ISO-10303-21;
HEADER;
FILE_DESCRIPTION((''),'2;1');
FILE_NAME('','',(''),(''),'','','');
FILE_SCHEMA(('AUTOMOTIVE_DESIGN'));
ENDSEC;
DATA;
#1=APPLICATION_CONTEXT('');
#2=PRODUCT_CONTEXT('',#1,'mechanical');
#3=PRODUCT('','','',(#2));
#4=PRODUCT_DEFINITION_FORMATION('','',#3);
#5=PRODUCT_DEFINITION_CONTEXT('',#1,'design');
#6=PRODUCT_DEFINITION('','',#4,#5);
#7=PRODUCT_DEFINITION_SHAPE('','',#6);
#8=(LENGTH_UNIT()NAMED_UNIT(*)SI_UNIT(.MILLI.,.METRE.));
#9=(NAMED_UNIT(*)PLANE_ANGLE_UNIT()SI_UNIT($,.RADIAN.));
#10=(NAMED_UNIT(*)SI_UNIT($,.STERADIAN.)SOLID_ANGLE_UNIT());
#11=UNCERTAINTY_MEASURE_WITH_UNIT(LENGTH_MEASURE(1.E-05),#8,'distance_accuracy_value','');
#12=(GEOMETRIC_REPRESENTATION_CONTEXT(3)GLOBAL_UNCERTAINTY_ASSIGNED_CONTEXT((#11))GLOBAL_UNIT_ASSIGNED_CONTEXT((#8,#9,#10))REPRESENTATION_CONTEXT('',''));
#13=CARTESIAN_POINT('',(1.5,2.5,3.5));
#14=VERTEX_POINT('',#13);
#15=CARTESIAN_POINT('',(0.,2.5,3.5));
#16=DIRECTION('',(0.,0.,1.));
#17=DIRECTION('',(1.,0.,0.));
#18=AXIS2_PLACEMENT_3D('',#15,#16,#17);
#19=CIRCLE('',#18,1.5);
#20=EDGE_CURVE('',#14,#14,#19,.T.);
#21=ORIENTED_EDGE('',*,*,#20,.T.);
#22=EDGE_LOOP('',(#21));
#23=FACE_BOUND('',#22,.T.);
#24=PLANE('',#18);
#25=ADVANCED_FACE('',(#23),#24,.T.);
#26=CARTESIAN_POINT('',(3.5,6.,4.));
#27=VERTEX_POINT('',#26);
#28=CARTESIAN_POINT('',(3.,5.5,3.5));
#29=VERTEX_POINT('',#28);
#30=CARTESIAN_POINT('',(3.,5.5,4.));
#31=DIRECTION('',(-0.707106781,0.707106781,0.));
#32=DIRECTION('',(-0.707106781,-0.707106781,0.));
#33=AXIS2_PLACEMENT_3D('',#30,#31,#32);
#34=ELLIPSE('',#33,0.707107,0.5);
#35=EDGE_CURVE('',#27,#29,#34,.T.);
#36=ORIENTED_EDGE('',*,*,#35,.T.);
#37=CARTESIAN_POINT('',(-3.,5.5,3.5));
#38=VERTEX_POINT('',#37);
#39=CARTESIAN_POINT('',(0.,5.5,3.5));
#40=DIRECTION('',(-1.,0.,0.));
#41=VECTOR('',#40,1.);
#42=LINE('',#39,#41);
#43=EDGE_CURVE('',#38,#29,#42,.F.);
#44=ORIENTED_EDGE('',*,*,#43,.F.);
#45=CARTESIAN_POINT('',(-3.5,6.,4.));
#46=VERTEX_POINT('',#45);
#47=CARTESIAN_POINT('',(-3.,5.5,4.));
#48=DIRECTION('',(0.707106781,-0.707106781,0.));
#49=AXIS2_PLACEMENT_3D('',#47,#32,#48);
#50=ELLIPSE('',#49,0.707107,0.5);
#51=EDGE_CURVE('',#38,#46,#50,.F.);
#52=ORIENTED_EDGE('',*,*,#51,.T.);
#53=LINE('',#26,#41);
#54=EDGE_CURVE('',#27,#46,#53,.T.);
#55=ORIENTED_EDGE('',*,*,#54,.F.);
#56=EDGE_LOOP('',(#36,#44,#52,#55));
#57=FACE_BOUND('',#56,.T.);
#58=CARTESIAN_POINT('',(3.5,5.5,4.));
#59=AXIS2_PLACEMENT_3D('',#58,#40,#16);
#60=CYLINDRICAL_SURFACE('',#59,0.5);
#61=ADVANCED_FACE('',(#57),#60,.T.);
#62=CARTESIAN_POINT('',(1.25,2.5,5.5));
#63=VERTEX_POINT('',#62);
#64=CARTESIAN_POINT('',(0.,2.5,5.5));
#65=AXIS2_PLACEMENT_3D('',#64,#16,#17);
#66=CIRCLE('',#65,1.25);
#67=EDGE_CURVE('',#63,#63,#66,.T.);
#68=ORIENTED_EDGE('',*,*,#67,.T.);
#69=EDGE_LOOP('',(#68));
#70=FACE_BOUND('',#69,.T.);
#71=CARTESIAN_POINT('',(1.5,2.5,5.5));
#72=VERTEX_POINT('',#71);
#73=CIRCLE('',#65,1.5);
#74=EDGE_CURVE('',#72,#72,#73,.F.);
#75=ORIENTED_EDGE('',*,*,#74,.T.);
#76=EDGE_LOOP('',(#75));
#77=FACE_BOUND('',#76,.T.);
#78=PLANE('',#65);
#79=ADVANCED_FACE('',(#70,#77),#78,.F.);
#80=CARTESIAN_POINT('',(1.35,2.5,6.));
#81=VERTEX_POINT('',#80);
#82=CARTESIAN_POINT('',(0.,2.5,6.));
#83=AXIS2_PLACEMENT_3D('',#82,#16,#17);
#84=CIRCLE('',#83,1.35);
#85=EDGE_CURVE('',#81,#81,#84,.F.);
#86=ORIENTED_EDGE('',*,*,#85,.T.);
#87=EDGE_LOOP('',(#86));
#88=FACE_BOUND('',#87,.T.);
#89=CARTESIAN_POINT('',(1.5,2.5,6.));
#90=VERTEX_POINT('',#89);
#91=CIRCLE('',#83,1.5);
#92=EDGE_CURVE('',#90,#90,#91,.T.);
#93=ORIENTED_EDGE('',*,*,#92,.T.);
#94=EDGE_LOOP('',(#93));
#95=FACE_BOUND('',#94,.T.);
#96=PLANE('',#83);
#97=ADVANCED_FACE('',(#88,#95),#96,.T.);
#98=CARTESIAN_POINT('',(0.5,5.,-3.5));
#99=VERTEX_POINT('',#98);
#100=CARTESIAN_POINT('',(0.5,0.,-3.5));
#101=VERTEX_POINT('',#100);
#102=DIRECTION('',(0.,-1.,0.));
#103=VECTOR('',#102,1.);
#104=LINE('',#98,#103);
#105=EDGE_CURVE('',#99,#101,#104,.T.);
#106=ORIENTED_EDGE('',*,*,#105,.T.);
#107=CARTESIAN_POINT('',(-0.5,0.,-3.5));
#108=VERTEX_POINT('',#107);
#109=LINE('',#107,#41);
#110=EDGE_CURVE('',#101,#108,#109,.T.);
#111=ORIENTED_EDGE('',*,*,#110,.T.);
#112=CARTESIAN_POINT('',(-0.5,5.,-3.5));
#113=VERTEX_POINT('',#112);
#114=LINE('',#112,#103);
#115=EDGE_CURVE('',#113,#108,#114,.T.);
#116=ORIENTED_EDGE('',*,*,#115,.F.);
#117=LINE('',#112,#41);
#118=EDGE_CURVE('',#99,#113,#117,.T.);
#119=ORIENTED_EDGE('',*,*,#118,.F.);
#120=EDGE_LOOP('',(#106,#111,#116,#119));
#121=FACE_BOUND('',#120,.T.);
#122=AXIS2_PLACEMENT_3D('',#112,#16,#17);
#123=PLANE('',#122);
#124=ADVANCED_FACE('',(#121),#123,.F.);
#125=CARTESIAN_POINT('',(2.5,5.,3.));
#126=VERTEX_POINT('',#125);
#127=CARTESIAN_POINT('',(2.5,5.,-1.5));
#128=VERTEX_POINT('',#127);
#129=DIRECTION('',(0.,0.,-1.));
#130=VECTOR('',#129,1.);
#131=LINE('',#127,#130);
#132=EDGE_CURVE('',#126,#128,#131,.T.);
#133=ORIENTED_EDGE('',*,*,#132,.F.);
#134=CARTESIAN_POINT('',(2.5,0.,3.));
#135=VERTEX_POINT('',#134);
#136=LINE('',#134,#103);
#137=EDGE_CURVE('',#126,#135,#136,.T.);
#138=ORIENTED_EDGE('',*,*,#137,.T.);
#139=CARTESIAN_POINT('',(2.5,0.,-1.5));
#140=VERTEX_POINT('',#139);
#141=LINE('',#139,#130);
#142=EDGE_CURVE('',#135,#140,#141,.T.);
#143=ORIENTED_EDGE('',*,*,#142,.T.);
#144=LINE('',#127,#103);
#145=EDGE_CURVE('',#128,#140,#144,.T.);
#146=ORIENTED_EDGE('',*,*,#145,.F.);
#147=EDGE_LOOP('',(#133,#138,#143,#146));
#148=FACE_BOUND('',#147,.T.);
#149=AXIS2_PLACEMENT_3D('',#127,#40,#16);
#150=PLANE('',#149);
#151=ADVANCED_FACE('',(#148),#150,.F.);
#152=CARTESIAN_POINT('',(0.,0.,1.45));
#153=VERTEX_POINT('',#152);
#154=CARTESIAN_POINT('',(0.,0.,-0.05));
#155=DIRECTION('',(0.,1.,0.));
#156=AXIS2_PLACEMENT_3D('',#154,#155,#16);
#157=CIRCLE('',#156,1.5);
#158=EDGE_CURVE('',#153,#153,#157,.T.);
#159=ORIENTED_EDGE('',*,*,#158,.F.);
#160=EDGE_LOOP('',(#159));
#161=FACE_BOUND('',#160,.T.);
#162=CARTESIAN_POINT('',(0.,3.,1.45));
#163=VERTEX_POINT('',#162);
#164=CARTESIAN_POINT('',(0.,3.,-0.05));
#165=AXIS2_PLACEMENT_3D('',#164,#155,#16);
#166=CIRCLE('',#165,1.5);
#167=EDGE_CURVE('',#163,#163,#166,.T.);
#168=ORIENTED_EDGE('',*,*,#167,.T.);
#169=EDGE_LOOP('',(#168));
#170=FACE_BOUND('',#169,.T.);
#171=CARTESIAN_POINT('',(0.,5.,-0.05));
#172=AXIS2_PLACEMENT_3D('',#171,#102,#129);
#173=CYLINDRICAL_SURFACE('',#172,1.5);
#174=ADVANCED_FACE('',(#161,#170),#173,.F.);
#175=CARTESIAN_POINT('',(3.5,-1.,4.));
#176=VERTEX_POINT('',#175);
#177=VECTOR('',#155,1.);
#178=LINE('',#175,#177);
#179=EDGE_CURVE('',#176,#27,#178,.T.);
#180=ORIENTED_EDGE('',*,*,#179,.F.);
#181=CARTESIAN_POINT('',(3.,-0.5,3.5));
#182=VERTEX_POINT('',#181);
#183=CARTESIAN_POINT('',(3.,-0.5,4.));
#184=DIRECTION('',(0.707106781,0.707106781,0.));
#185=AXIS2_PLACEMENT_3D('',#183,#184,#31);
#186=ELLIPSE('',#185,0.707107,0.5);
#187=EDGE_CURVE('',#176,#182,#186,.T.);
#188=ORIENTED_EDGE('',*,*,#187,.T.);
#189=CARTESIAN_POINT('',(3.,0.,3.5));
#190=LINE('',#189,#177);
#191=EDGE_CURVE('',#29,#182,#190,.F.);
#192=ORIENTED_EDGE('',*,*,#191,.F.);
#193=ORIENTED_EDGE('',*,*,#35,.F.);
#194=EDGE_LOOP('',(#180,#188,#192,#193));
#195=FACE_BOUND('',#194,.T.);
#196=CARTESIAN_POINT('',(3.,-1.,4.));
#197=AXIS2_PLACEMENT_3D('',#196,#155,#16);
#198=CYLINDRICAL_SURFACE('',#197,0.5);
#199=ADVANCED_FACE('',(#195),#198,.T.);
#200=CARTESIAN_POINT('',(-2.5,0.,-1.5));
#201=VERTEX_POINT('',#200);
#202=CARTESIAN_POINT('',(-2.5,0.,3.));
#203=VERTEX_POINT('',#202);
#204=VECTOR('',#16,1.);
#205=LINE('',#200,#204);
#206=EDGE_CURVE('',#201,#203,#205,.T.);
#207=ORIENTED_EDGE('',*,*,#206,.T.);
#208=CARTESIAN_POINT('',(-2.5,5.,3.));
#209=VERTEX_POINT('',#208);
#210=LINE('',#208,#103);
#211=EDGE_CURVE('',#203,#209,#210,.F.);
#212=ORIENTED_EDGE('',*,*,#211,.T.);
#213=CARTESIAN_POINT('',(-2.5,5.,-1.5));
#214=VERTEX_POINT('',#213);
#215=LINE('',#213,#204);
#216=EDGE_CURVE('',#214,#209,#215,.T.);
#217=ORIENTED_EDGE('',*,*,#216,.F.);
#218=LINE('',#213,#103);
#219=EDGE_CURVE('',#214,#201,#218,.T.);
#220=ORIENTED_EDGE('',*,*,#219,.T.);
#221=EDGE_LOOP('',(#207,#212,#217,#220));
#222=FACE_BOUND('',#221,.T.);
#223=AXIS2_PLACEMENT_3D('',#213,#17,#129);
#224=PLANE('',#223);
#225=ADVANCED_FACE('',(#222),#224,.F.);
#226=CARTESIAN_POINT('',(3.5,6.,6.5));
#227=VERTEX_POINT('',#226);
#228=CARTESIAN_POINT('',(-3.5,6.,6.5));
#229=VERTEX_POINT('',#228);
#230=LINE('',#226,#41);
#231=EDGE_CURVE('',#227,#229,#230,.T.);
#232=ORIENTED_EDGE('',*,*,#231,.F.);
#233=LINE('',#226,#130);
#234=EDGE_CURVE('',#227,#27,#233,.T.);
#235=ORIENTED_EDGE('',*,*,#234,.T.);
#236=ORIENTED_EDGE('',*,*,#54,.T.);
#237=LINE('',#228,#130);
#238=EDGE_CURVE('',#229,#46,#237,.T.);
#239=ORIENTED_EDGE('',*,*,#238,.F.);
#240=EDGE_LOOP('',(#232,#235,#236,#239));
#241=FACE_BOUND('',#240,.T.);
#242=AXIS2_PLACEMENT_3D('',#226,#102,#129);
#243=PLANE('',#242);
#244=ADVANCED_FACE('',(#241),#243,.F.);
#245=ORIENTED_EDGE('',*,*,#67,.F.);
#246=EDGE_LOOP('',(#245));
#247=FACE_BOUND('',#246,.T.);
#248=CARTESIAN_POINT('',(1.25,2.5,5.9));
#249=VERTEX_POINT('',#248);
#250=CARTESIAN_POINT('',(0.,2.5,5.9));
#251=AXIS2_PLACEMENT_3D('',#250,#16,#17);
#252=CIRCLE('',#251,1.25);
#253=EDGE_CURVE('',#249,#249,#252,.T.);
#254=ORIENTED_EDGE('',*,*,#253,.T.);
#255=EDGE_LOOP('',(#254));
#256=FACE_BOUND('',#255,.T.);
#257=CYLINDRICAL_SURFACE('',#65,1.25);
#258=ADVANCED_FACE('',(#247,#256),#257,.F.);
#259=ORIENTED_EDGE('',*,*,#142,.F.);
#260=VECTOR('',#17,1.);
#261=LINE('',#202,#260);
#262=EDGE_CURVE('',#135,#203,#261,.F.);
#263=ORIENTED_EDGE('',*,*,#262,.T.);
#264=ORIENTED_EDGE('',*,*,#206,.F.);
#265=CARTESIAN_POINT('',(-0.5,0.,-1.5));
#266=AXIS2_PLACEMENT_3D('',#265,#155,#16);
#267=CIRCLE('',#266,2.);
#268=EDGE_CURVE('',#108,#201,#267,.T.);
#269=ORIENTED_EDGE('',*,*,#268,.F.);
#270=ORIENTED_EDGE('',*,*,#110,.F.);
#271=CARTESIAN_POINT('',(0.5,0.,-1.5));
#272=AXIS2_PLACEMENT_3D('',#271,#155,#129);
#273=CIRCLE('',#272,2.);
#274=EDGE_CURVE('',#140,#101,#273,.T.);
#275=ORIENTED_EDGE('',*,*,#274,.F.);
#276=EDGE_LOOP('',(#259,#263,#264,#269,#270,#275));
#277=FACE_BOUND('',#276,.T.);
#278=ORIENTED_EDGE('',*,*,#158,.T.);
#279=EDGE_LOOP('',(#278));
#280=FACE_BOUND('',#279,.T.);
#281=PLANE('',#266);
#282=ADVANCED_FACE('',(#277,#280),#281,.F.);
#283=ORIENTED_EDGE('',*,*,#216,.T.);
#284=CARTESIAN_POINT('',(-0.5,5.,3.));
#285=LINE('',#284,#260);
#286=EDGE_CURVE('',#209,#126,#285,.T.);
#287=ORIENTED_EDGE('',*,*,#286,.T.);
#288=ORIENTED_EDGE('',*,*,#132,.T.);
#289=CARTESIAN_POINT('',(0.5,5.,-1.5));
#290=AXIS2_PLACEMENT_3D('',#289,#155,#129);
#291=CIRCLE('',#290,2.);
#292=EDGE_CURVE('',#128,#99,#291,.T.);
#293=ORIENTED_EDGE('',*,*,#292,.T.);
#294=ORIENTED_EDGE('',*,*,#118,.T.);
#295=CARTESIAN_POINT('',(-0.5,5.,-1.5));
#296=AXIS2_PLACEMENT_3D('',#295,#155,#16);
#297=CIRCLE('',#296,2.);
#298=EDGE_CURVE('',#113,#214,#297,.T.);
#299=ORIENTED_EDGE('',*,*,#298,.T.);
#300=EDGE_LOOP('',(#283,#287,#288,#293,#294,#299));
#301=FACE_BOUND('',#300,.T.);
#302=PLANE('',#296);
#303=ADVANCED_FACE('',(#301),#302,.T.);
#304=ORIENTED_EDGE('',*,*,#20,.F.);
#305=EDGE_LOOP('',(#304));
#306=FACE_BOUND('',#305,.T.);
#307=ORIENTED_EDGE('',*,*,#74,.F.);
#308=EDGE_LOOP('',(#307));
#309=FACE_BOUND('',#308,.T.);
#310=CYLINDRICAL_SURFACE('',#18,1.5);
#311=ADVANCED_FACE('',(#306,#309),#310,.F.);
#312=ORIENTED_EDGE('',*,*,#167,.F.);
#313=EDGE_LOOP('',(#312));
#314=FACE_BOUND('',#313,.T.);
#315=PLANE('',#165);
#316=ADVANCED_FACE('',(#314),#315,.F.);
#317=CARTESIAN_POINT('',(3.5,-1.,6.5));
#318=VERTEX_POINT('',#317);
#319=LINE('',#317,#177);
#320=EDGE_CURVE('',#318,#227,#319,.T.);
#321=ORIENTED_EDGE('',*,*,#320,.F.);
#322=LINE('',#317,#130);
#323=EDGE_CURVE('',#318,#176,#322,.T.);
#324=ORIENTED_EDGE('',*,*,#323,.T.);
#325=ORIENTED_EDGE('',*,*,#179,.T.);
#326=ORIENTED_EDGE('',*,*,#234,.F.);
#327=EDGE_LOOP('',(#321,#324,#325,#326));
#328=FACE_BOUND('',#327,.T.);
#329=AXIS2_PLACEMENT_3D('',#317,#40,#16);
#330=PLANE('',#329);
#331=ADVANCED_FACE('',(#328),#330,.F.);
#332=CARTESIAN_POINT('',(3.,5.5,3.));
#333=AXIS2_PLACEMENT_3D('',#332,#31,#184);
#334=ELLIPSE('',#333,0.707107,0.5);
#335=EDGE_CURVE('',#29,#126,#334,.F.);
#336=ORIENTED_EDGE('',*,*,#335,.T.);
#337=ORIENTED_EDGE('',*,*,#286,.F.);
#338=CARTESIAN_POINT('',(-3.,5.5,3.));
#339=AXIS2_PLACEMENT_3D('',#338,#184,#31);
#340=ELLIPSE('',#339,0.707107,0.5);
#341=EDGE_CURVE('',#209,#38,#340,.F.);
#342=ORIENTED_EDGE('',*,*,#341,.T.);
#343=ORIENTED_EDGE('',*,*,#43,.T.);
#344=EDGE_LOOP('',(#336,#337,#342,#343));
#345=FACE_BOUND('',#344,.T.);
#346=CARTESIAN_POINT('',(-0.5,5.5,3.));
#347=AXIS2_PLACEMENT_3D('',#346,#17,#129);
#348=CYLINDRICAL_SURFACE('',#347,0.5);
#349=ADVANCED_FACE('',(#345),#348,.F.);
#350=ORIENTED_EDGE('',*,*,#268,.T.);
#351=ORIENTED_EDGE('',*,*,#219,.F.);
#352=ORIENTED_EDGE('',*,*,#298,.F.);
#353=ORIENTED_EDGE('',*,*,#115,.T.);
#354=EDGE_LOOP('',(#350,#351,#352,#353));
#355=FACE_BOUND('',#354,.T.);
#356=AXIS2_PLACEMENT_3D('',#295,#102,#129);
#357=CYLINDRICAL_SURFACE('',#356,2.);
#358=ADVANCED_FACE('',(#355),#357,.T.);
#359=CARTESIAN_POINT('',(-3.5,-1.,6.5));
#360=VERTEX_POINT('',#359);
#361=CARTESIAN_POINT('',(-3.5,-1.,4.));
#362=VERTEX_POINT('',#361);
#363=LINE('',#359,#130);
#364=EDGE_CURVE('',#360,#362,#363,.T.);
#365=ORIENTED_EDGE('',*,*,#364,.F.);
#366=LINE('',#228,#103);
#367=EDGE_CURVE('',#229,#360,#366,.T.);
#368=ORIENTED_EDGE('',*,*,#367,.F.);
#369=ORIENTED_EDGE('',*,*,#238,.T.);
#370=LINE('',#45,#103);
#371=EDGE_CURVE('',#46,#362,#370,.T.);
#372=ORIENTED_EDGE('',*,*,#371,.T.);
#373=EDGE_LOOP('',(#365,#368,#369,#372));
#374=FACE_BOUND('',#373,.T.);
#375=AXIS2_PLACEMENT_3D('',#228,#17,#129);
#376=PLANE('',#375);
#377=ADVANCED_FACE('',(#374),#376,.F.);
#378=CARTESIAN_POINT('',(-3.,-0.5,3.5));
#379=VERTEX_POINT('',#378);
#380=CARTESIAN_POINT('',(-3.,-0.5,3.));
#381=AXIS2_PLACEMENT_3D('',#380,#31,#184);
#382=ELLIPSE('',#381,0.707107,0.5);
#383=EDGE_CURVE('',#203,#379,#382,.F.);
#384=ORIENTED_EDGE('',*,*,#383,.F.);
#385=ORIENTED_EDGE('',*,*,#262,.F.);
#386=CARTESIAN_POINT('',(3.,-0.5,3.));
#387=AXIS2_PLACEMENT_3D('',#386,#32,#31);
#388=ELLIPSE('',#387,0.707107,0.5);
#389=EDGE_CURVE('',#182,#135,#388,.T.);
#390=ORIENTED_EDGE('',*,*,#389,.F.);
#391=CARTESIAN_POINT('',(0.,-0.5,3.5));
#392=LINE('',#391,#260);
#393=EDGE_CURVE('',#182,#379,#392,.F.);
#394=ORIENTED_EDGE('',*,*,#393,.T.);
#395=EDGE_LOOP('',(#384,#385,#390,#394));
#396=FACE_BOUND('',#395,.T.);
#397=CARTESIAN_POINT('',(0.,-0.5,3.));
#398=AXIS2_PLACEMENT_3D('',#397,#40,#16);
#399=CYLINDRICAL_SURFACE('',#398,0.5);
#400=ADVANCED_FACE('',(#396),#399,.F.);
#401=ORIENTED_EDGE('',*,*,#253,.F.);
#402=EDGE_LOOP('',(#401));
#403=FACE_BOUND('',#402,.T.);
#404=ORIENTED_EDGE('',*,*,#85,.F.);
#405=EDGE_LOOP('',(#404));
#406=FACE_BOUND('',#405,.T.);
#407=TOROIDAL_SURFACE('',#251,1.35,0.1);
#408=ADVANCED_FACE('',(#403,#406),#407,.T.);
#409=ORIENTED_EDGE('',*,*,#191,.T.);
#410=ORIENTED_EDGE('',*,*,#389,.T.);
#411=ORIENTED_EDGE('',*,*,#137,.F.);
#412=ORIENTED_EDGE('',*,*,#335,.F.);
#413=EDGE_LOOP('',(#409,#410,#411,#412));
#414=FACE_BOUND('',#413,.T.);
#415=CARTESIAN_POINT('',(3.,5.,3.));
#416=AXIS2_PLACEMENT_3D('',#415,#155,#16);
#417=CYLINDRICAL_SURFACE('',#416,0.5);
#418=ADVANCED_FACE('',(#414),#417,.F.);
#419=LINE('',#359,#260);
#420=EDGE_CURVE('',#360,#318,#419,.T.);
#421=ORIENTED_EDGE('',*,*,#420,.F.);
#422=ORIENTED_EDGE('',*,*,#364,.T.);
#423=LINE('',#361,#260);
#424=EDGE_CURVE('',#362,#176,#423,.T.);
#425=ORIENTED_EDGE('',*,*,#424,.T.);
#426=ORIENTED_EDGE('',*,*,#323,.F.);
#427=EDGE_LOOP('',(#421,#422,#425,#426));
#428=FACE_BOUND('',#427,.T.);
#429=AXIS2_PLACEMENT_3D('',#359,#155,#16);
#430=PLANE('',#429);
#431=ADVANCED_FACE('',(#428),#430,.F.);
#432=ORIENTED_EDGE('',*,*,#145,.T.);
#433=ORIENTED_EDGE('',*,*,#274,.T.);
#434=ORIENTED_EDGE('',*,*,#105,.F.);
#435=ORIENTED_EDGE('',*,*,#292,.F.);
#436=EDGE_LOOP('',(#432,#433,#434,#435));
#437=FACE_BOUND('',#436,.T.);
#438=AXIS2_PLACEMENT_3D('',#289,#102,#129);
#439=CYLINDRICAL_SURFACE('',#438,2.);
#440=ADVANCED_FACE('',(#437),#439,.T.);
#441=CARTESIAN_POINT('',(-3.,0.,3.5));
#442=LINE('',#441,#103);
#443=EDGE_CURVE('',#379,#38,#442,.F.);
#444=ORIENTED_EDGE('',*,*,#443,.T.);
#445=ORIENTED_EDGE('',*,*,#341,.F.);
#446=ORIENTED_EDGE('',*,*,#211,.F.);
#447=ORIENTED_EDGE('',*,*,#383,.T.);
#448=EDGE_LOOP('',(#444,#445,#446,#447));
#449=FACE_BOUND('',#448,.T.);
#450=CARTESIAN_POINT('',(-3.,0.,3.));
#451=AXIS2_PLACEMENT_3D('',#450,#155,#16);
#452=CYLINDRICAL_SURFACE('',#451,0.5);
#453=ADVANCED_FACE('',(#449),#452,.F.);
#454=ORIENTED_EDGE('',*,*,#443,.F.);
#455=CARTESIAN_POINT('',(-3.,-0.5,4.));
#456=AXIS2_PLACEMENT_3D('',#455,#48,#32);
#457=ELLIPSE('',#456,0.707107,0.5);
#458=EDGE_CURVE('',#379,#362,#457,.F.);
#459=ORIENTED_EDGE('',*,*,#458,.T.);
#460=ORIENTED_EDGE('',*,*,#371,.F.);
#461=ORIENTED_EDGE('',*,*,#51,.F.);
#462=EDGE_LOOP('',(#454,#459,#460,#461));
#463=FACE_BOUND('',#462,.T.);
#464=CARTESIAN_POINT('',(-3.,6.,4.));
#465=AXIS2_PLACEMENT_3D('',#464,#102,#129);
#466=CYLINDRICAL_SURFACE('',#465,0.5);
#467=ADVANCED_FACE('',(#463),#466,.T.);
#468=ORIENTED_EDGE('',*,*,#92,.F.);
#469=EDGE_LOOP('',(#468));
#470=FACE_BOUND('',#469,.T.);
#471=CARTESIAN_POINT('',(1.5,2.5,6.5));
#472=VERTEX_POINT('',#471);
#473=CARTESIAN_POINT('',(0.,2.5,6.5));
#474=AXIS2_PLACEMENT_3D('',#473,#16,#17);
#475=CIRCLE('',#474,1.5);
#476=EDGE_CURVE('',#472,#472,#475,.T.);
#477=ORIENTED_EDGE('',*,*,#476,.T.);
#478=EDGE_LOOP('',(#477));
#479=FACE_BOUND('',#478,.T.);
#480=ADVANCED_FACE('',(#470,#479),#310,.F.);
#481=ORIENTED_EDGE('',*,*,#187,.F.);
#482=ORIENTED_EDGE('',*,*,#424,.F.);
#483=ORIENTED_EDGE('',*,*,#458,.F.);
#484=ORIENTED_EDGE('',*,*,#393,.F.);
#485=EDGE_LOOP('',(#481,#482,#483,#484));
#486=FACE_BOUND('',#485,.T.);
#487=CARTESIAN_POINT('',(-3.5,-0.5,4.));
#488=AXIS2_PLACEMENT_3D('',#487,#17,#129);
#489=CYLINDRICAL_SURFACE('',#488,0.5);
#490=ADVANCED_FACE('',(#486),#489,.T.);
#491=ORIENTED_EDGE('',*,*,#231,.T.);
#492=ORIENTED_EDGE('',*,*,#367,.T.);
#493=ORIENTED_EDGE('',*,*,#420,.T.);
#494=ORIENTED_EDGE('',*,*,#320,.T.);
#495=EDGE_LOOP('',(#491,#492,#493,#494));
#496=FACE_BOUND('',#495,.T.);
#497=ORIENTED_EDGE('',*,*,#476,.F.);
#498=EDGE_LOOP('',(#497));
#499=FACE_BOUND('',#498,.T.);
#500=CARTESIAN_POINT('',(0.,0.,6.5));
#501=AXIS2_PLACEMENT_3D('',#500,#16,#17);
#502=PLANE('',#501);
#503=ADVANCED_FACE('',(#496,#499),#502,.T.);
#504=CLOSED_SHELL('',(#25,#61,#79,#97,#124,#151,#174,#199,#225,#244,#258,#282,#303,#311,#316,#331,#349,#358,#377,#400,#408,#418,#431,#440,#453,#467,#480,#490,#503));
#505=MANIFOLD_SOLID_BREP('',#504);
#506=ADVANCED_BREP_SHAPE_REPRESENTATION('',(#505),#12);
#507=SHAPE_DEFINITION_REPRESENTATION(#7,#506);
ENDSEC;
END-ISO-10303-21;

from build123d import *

# Parameters (mm, degrees)
ESQUISSE4_R             = 1.5
BOSS_EXTRU_2_DEPTH      = 5
BOSS_EXTRU_3_START      = -2
ESQUISSE5_R             = 1.5
BOSS_EXTRU_3_DEPTH      = 2
ESQUISSE6_W             = 7
ESQUISSE6_H             = 7
BOSS_EXTRU_4_DEPTH      = 3
CONG_1_R                = 0.5
ESQUISSE7_R             = 1.5
ENL_V_MAT_EXTRU_1_DEPTH = 3
BOSS_EXTRU_5_START      = -0.5
ESQUISSE8_R             = 1.5
ESQUISSE8_R_2           = 1.25
BOSS_EXTRU_5_DEPTH      = 0.5
CONG_2_R                = 0.1


with BuildPart() as part:
    # Esquisse4 → Boss.-Extru.2 (new body)
    with BuildSketch(Plane(origin=(0, 0, 0), x_dir=(1, 0, 0), z_dir=(0, 1, 0))):
        with BuildLine():
            Line((-0.5, 3.5), (0.5, 3.5))
            ThreePointArc((0.5, 3.5), (1.914213562, 2.914213562), (2.5, 1.5))
            Line((2.5, 1.5), (2.5, -3.5))
            Line((2.5, -3.5), (-2.5, -3.5))
            Line((-2.5, -3.5), (-2.5, 1.5))
            ThreePointArc((-2.5, 1.5), (-1.914213562, 2.914213562), (-0.5, 3.5))
        make_face()
        with Locations(Location((0, 0.05, 0), (0, 0, 270))):
            Circle(ESQUISSE4_R, mode=Mode.SUBTRACT)
    extrude(amount=BOSS_EXTRU_2_DEPTH)

    # Esquisse5 → Boss.-Extru.3 (add)
    with BuildSketch(Plane(origin=(0, 5, 0), x_dir=(1, 0, 0), z_dir=(0, 1, 0)).offset(BOSS_EXTRU_3_START)):
        with Locations(Location((0, 0.05, 0), (0, 0, 270))):
            Circle(ESQUISSE5_R)
    extrude(amount=BOSS_EXTRU_3_DEPTH)

    # Esquisse6 → Boss.-Extru.4 (add)
    with BuildSketch(Plane.XY.offset(3.5)):
        with Locations((0, 2.5)):
            Rectangle(ESQUISSE6_W, ESQUISSE6_H)
    extrude(amount=BOSS_EXTRU_4_DEPTH)

    # Congé1
    cong_1_edges = [part.edges().sort_by_distance(p)[0] for p in [
        (2.5, 2.5, 3.5),
        (-2.5, 2.5, 3.5),
        (0, 5, 3.5),
        (-3.5, 2.5, 3.5),
        (0, -1, 3.5),
        (3.5, 2.5, 3.5),
        (0, 6, 3.5),
        (0, 0, 3.5),
    ]]
    fillet(cong_1_edges, radius=CONG_1_R - 0.0001)  # a hair under: the kernel refuses the full size

    # Esquisse7 → Enlèv. mat.-Extru.1 (cut)
    with BuildSketch(Plane.XY.offset(6.5)):
        with Locations((0, 2.5)):
            Circle(ESQUISSE7_R)
    extrude(amount=-ENL_V_MAT_EXTRU_1_DEPTH, mode=Mode.SUBTRACT)

    # Esquisse8 → Boss.-Extru.5 (add)
    with BuildSketch(Plane.XY.offset(6.5).offset(BOSS_EXTRU_5_START)):
        with Locations((0, 2.5)):
            Circle(ESQUISSE8_R)
        with Locations((0, 2.5)):
            Circle(ESQUISSE8_R_2, mode=Mode.SUBTRACT)
    extrude(amount=-BOSS_EXTRU_5_DEPTH)

    # Congé2
    cong_2_edges = [part.edges().sort_by_distance(p)[0] for p in [
        (-1.25, 2.5, 6),
    ]]
    fillet(cong_2_edges, radius=CONG_2_R)


solid = part.part
